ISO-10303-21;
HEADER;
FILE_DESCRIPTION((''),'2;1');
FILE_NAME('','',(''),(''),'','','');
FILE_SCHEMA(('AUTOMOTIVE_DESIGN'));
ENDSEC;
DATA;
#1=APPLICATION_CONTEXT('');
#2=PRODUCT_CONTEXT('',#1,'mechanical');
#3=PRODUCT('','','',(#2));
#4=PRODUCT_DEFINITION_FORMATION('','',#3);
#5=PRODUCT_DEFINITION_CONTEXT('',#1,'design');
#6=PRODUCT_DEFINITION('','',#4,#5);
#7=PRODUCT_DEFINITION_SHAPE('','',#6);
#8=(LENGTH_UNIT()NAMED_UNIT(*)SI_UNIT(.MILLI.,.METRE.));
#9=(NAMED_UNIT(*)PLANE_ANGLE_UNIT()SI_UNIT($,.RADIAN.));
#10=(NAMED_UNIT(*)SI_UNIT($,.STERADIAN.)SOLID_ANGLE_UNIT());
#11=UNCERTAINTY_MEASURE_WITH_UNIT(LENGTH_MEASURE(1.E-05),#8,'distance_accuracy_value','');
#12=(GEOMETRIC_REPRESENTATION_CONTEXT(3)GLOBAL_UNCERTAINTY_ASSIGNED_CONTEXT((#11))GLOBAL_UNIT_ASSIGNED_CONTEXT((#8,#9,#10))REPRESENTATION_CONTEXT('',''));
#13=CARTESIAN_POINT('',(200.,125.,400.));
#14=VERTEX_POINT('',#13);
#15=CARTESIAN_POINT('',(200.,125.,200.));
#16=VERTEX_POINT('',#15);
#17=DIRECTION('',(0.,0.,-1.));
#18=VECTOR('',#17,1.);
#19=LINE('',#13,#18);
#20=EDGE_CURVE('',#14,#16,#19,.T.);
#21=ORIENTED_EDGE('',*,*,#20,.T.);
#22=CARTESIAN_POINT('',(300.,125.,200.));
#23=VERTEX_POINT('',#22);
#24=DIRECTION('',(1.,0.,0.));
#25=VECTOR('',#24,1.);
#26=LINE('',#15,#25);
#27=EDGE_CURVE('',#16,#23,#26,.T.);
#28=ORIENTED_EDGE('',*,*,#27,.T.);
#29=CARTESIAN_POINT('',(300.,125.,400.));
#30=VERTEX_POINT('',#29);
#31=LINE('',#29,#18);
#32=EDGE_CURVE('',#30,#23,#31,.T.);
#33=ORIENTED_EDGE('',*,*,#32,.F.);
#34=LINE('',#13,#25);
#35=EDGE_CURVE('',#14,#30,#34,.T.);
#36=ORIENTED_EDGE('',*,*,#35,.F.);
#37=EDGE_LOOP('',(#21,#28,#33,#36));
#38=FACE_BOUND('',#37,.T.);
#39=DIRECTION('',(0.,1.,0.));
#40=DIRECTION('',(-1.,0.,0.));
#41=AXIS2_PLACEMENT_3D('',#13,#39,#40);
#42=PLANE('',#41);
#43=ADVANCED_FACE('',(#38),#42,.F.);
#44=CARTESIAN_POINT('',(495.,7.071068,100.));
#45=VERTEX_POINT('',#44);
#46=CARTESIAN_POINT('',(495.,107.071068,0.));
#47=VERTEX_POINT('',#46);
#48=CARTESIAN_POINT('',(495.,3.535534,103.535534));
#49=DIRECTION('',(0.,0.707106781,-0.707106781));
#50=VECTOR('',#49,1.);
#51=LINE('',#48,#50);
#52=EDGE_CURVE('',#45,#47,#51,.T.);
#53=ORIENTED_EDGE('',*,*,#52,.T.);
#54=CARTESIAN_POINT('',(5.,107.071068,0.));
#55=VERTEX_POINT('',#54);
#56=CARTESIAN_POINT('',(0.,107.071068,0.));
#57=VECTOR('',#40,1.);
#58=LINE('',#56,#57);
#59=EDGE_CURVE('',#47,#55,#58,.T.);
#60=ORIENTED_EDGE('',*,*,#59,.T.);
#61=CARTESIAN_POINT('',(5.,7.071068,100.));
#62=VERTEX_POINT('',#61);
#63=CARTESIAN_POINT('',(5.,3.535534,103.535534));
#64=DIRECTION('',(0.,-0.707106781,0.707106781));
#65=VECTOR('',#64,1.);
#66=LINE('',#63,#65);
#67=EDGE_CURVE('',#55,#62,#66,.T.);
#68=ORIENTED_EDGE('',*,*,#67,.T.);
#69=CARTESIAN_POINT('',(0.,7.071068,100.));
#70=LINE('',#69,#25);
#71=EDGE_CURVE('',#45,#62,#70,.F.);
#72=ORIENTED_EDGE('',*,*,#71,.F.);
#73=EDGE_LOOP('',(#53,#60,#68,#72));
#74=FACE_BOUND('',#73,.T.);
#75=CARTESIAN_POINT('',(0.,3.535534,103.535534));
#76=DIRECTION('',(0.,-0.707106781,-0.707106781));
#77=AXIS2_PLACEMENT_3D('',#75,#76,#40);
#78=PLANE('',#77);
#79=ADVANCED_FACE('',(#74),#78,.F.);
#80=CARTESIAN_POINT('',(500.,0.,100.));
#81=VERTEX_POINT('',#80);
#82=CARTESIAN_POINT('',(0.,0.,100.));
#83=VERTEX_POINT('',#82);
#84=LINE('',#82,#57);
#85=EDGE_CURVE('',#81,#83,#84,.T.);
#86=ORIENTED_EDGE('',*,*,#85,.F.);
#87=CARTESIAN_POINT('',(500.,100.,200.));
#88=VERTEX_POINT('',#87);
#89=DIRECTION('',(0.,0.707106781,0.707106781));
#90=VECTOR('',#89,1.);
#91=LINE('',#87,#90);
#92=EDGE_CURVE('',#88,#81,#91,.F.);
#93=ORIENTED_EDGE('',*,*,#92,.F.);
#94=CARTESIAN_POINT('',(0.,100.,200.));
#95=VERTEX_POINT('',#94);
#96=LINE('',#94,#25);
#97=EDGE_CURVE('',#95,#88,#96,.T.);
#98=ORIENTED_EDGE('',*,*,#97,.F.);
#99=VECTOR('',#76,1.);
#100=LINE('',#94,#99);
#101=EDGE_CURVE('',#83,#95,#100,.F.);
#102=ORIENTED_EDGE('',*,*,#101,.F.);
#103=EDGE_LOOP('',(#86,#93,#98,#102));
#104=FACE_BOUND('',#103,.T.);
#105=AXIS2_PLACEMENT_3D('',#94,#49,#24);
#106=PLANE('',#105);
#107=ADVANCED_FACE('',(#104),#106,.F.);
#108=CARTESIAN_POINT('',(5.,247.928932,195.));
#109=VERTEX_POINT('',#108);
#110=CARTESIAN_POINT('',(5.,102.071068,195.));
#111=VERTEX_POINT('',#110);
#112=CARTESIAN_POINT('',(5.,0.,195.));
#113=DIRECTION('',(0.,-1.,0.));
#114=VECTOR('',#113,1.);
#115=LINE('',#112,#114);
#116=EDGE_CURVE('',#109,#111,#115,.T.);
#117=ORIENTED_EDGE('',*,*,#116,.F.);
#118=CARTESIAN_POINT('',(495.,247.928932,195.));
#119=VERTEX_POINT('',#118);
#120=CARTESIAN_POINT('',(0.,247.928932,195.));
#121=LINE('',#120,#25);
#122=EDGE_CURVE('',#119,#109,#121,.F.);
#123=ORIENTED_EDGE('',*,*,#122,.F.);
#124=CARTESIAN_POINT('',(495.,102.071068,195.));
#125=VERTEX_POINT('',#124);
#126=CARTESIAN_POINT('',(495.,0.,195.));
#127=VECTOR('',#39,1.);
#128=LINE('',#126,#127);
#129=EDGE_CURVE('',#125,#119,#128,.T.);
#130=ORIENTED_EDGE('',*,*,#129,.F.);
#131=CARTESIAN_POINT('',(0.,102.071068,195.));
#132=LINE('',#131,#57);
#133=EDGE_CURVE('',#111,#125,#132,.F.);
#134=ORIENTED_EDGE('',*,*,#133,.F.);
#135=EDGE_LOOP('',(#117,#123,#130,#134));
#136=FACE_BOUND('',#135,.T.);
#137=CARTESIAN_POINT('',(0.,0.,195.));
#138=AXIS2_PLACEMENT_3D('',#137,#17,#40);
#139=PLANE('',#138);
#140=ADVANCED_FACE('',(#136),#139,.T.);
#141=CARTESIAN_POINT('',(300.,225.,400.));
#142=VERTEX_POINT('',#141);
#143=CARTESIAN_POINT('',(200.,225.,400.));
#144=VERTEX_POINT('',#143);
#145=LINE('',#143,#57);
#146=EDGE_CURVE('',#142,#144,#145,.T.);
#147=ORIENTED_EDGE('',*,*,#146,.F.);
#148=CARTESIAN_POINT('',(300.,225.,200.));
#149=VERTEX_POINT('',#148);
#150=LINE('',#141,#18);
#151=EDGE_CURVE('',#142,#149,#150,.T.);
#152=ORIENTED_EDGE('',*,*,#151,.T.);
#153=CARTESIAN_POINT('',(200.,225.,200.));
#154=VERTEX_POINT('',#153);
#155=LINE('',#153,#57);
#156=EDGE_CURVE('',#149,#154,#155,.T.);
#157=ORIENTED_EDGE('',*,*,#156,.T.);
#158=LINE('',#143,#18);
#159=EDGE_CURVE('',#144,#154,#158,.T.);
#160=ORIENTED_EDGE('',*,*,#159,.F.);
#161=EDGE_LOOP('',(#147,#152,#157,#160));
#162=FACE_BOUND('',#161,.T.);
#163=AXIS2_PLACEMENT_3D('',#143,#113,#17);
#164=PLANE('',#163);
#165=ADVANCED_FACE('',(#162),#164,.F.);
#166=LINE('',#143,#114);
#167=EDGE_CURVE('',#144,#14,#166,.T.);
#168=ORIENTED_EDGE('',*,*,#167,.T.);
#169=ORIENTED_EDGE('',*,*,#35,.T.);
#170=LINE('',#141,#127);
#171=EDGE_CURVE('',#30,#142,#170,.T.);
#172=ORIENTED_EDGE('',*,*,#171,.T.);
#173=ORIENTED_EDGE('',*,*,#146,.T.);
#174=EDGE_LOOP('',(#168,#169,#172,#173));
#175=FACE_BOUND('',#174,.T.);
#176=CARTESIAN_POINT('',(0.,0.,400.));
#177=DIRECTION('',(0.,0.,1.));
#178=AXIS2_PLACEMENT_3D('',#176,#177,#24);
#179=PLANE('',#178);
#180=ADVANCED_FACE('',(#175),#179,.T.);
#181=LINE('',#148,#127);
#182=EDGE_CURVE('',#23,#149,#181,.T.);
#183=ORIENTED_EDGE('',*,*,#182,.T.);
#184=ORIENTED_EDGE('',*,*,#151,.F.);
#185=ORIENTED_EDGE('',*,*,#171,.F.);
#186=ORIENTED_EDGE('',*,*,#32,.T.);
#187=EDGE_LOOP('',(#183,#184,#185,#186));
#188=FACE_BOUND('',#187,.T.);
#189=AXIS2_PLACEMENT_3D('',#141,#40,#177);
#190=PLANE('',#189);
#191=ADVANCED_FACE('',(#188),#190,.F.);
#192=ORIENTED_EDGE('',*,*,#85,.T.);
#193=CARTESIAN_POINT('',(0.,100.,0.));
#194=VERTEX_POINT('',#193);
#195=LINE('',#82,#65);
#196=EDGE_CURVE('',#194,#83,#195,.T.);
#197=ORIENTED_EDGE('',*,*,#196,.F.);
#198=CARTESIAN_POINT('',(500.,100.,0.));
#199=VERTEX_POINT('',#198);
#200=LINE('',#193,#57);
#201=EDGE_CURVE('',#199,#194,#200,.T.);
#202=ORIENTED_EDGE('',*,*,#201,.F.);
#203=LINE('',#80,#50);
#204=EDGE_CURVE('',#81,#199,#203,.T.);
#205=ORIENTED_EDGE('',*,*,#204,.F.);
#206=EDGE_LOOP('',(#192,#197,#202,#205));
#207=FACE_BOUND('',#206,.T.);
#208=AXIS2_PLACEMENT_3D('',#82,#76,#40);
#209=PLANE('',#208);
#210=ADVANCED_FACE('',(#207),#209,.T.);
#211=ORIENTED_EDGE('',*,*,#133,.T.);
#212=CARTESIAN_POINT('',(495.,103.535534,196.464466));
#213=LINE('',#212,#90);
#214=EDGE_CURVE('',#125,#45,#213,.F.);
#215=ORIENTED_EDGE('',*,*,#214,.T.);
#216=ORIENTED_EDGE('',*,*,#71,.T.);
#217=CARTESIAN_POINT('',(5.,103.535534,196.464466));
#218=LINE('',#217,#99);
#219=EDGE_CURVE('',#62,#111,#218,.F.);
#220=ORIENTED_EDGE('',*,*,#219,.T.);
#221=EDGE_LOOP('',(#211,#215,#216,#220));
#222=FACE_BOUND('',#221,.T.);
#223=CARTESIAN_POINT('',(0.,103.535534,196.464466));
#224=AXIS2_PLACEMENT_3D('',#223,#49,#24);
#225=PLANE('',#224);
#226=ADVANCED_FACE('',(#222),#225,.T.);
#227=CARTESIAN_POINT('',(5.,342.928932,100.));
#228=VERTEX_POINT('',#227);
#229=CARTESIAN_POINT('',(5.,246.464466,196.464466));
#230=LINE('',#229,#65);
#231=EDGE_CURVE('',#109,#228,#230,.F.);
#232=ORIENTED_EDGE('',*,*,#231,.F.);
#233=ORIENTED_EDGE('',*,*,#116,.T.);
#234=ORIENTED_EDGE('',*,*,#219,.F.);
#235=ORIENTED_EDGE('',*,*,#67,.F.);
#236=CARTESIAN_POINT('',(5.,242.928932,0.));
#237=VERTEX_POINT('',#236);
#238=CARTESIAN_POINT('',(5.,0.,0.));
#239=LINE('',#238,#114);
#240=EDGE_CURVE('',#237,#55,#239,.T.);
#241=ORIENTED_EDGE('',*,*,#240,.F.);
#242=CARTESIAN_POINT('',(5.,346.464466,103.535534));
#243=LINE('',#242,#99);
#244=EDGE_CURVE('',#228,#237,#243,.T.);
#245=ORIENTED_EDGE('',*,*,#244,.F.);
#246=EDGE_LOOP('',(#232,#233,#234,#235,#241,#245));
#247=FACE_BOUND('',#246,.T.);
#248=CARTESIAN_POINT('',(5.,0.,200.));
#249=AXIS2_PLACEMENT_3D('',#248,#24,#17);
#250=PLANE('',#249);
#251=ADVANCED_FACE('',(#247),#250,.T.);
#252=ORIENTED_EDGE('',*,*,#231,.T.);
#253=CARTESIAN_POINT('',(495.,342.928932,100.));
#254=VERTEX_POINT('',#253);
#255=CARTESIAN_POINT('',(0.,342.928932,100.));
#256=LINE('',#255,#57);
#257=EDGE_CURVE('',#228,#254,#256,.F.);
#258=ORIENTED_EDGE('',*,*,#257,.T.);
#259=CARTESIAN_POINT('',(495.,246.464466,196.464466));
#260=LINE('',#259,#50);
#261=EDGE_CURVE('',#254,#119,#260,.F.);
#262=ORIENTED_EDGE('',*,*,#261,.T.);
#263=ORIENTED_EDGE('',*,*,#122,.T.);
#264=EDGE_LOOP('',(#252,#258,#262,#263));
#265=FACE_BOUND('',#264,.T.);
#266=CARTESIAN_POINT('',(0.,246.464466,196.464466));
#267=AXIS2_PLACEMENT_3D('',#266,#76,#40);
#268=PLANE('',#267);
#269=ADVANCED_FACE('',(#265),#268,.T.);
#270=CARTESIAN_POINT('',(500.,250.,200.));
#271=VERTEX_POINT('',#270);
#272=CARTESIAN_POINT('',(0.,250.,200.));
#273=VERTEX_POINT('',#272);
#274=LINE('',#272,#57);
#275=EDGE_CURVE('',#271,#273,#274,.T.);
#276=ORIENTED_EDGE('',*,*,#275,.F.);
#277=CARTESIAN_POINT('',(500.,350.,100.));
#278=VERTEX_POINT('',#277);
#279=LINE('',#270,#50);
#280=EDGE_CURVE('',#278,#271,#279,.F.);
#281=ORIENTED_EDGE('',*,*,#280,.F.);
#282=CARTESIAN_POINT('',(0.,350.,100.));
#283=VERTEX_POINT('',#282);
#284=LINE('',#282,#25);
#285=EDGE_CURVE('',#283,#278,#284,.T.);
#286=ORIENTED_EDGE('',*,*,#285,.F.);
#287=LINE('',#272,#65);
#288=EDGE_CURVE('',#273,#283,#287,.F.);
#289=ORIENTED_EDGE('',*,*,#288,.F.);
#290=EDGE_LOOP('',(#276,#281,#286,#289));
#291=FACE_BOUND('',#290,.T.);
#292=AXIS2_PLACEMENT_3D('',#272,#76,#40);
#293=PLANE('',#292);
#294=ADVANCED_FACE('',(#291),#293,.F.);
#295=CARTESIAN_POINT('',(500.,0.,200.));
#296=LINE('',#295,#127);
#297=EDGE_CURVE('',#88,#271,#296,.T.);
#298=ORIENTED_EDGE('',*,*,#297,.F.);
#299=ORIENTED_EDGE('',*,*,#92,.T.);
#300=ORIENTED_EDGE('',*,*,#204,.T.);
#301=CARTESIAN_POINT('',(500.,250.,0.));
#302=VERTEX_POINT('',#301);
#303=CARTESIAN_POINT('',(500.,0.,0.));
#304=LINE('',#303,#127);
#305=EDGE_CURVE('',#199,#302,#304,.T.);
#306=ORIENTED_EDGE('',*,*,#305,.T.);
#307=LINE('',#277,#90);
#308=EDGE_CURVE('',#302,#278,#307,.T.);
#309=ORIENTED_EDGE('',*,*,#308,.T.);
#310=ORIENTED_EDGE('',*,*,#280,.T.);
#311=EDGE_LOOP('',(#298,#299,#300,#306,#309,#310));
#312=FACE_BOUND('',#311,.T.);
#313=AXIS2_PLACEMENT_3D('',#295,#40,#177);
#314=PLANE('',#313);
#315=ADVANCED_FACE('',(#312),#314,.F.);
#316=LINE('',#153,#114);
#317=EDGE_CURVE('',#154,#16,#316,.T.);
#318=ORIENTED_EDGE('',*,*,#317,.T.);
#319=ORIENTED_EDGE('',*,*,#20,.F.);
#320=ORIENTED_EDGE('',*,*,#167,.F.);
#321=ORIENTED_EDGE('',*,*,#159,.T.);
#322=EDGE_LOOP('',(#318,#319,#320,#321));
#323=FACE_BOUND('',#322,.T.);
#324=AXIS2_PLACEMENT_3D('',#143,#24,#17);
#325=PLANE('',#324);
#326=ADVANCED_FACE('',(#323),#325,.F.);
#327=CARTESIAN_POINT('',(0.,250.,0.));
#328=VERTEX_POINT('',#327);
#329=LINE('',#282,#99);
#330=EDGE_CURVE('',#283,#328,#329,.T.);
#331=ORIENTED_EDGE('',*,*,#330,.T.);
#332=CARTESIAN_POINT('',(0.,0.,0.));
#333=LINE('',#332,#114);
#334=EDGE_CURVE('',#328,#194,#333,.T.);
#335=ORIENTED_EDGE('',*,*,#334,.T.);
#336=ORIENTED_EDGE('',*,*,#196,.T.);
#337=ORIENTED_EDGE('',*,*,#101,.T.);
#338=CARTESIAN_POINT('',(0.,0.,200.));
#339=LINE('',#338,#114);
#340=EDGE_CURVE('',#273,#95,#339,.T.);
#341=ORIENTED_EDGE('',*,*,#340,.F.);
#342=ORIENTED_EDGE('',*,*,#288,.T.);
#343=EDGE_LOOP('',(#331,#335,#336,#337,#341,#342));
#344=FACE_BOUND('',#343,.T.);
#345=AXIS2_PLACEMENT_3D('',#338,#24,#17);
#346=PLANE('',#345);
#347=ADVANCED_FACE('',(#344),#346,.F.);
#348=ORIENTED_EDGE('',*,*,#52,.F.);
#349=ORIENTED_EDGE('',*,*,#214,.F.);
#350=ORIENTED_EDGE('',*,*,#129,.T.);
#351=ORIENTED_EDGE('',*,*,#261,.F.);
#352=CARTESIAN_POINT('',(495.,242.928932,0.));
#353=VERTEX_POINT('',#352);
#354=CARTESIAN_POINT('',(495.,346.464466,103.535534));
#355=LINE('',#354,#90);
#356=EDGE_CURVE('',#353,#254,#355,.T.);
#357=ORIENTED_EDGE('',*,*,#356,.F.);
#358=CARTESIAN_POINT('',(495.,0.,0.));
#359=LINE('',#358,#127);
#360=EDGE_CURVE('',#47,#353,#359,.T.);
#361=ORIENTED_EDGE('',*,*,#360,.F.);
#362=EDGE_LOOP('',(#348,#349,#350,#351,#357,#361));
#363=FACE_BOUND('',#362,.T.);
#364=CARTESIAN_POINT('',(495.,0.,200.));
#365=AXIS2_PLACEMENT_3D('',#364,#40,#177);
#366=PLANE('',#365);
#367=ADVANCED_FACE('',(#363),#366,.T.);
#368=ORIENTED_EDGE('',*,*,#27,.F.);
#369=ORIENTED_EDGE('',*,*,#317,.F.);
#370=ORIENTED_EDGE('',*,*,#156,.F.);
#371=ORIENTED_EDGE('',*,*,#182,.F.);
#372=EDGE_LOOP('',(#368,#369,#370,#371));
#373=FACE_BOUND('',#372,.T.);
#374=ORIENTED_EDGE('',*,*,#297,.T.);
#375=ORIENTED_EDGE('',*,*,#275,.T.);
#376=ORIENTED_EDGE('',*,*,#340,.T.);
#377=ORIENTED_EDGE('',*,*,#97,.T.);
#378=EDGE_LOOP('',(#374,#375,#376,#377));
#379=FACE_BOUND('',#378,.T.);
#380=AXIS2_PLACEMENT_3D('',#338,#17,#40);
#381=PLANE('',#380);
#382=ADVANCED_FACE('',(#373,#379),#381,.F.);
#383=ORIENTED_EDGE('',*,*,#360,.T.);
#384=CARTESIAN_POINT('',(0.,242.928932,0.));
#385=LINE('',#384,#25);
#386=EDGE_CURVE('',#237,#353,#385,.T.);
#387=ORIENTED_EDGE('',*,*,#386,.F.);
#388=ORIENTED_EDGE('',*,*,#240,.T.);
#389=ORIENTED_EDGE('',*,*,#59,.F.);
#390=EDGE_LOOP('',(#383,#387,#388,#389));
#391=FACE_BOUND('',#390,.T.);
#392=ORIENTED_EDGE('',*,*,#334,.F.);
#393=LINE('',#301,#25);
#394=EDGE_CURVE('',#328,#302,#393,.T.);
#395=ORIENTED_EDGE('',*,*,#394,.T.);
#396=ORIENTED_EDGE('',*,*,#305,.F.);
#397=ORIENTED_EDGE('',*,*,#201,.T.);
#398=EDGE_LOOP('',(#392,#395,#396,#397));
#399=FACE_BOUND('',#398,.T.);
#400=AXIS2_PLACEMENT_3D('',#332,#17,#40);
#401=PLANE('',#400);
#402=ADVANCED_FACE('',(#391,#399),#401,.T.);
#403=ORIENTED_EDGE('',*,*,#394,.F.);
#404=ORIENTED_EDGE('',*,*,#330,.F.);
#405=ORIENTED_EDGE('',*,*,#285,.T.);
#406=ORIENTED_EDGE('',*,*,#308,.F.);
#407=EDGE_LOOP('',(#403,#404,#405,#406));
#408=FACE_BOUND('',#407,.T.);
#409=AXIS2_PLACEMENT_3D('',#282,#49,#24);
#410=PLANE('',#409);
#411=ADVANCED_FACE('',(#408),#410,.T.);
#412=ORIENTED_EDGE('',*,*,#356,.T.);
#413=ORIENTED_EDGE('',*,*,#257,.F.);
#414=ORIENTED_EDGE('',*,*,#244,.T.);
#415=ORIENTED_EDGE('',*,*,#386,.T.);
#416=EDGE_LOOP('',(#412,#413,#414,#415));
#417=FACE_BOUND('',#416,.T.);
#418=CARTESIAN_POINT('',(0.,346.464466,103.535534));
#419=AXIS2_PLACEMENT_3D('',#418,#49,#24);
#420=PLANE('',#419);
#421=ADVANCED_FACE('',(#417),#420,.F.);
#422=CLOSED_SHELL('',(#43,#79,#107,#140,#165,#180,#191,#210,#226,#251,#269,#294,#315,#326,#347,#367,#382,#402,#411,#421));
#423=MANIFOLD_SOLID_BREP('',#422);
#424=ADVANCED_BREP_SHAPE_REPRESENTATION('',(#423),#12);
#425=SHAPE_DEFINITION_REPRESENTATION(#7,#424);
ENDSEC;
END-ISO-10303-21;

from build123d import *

# Parameters (mm, degrees)
SKETCH1_W           = 500
SKETCH1_H           = 350
BOSS_EXTRUDE1_DEPTH = 200
CHAMFER3_SIZE       = 100
SHELL2_T            = -5
SKETCH3_W           = 100
SKETCH3_H           = 100
BOSS_EXTRUDE3_DEPTH = 200


with BuildPart() as part:
    # Sketch1 → Boss-Extrude1 (new body)
    with BuildSketch(Plane.XY):
        with Locations((250, 175)):
            Rectangle(SKETCH1_W, SKETCH1_H)
    extrude(amount=BOSS_EXTRUDE1_DEPTH)

    # Chamfer3
    chamfer3_edges = [part.edges().sort_by_distance(p)[0] for p in [
        (250, 350, 0),
        (250, 350, 200),
        (250, 0, 0),
        (250, 0, 200),
    ]]
    chamfer(chamfer3_edges, length=CHAMFER3_SIZE - 0.0001)  # a hair under: the kernel refuses the full size

    # Shell2
    shell2_openings = [part.faces().sort_by_distance(p)[0] for p in [
        (250, 175, 0),
    ]]
    offset(amount=SHELL2_T, openings=shell2_openings, kind=Kind.INTERSECTION)

    # Sketch3 → Boss-Extrude3 (add)
    with BuildSketch(Plane.XY.offset(200)):
        with Locations((250, 175)):
            Rectangle(SKETCH3_W, SKETCH3_H)
    extrude(amount=BOSS_EXTRUDE3_DEPTH)


solid = part.part
